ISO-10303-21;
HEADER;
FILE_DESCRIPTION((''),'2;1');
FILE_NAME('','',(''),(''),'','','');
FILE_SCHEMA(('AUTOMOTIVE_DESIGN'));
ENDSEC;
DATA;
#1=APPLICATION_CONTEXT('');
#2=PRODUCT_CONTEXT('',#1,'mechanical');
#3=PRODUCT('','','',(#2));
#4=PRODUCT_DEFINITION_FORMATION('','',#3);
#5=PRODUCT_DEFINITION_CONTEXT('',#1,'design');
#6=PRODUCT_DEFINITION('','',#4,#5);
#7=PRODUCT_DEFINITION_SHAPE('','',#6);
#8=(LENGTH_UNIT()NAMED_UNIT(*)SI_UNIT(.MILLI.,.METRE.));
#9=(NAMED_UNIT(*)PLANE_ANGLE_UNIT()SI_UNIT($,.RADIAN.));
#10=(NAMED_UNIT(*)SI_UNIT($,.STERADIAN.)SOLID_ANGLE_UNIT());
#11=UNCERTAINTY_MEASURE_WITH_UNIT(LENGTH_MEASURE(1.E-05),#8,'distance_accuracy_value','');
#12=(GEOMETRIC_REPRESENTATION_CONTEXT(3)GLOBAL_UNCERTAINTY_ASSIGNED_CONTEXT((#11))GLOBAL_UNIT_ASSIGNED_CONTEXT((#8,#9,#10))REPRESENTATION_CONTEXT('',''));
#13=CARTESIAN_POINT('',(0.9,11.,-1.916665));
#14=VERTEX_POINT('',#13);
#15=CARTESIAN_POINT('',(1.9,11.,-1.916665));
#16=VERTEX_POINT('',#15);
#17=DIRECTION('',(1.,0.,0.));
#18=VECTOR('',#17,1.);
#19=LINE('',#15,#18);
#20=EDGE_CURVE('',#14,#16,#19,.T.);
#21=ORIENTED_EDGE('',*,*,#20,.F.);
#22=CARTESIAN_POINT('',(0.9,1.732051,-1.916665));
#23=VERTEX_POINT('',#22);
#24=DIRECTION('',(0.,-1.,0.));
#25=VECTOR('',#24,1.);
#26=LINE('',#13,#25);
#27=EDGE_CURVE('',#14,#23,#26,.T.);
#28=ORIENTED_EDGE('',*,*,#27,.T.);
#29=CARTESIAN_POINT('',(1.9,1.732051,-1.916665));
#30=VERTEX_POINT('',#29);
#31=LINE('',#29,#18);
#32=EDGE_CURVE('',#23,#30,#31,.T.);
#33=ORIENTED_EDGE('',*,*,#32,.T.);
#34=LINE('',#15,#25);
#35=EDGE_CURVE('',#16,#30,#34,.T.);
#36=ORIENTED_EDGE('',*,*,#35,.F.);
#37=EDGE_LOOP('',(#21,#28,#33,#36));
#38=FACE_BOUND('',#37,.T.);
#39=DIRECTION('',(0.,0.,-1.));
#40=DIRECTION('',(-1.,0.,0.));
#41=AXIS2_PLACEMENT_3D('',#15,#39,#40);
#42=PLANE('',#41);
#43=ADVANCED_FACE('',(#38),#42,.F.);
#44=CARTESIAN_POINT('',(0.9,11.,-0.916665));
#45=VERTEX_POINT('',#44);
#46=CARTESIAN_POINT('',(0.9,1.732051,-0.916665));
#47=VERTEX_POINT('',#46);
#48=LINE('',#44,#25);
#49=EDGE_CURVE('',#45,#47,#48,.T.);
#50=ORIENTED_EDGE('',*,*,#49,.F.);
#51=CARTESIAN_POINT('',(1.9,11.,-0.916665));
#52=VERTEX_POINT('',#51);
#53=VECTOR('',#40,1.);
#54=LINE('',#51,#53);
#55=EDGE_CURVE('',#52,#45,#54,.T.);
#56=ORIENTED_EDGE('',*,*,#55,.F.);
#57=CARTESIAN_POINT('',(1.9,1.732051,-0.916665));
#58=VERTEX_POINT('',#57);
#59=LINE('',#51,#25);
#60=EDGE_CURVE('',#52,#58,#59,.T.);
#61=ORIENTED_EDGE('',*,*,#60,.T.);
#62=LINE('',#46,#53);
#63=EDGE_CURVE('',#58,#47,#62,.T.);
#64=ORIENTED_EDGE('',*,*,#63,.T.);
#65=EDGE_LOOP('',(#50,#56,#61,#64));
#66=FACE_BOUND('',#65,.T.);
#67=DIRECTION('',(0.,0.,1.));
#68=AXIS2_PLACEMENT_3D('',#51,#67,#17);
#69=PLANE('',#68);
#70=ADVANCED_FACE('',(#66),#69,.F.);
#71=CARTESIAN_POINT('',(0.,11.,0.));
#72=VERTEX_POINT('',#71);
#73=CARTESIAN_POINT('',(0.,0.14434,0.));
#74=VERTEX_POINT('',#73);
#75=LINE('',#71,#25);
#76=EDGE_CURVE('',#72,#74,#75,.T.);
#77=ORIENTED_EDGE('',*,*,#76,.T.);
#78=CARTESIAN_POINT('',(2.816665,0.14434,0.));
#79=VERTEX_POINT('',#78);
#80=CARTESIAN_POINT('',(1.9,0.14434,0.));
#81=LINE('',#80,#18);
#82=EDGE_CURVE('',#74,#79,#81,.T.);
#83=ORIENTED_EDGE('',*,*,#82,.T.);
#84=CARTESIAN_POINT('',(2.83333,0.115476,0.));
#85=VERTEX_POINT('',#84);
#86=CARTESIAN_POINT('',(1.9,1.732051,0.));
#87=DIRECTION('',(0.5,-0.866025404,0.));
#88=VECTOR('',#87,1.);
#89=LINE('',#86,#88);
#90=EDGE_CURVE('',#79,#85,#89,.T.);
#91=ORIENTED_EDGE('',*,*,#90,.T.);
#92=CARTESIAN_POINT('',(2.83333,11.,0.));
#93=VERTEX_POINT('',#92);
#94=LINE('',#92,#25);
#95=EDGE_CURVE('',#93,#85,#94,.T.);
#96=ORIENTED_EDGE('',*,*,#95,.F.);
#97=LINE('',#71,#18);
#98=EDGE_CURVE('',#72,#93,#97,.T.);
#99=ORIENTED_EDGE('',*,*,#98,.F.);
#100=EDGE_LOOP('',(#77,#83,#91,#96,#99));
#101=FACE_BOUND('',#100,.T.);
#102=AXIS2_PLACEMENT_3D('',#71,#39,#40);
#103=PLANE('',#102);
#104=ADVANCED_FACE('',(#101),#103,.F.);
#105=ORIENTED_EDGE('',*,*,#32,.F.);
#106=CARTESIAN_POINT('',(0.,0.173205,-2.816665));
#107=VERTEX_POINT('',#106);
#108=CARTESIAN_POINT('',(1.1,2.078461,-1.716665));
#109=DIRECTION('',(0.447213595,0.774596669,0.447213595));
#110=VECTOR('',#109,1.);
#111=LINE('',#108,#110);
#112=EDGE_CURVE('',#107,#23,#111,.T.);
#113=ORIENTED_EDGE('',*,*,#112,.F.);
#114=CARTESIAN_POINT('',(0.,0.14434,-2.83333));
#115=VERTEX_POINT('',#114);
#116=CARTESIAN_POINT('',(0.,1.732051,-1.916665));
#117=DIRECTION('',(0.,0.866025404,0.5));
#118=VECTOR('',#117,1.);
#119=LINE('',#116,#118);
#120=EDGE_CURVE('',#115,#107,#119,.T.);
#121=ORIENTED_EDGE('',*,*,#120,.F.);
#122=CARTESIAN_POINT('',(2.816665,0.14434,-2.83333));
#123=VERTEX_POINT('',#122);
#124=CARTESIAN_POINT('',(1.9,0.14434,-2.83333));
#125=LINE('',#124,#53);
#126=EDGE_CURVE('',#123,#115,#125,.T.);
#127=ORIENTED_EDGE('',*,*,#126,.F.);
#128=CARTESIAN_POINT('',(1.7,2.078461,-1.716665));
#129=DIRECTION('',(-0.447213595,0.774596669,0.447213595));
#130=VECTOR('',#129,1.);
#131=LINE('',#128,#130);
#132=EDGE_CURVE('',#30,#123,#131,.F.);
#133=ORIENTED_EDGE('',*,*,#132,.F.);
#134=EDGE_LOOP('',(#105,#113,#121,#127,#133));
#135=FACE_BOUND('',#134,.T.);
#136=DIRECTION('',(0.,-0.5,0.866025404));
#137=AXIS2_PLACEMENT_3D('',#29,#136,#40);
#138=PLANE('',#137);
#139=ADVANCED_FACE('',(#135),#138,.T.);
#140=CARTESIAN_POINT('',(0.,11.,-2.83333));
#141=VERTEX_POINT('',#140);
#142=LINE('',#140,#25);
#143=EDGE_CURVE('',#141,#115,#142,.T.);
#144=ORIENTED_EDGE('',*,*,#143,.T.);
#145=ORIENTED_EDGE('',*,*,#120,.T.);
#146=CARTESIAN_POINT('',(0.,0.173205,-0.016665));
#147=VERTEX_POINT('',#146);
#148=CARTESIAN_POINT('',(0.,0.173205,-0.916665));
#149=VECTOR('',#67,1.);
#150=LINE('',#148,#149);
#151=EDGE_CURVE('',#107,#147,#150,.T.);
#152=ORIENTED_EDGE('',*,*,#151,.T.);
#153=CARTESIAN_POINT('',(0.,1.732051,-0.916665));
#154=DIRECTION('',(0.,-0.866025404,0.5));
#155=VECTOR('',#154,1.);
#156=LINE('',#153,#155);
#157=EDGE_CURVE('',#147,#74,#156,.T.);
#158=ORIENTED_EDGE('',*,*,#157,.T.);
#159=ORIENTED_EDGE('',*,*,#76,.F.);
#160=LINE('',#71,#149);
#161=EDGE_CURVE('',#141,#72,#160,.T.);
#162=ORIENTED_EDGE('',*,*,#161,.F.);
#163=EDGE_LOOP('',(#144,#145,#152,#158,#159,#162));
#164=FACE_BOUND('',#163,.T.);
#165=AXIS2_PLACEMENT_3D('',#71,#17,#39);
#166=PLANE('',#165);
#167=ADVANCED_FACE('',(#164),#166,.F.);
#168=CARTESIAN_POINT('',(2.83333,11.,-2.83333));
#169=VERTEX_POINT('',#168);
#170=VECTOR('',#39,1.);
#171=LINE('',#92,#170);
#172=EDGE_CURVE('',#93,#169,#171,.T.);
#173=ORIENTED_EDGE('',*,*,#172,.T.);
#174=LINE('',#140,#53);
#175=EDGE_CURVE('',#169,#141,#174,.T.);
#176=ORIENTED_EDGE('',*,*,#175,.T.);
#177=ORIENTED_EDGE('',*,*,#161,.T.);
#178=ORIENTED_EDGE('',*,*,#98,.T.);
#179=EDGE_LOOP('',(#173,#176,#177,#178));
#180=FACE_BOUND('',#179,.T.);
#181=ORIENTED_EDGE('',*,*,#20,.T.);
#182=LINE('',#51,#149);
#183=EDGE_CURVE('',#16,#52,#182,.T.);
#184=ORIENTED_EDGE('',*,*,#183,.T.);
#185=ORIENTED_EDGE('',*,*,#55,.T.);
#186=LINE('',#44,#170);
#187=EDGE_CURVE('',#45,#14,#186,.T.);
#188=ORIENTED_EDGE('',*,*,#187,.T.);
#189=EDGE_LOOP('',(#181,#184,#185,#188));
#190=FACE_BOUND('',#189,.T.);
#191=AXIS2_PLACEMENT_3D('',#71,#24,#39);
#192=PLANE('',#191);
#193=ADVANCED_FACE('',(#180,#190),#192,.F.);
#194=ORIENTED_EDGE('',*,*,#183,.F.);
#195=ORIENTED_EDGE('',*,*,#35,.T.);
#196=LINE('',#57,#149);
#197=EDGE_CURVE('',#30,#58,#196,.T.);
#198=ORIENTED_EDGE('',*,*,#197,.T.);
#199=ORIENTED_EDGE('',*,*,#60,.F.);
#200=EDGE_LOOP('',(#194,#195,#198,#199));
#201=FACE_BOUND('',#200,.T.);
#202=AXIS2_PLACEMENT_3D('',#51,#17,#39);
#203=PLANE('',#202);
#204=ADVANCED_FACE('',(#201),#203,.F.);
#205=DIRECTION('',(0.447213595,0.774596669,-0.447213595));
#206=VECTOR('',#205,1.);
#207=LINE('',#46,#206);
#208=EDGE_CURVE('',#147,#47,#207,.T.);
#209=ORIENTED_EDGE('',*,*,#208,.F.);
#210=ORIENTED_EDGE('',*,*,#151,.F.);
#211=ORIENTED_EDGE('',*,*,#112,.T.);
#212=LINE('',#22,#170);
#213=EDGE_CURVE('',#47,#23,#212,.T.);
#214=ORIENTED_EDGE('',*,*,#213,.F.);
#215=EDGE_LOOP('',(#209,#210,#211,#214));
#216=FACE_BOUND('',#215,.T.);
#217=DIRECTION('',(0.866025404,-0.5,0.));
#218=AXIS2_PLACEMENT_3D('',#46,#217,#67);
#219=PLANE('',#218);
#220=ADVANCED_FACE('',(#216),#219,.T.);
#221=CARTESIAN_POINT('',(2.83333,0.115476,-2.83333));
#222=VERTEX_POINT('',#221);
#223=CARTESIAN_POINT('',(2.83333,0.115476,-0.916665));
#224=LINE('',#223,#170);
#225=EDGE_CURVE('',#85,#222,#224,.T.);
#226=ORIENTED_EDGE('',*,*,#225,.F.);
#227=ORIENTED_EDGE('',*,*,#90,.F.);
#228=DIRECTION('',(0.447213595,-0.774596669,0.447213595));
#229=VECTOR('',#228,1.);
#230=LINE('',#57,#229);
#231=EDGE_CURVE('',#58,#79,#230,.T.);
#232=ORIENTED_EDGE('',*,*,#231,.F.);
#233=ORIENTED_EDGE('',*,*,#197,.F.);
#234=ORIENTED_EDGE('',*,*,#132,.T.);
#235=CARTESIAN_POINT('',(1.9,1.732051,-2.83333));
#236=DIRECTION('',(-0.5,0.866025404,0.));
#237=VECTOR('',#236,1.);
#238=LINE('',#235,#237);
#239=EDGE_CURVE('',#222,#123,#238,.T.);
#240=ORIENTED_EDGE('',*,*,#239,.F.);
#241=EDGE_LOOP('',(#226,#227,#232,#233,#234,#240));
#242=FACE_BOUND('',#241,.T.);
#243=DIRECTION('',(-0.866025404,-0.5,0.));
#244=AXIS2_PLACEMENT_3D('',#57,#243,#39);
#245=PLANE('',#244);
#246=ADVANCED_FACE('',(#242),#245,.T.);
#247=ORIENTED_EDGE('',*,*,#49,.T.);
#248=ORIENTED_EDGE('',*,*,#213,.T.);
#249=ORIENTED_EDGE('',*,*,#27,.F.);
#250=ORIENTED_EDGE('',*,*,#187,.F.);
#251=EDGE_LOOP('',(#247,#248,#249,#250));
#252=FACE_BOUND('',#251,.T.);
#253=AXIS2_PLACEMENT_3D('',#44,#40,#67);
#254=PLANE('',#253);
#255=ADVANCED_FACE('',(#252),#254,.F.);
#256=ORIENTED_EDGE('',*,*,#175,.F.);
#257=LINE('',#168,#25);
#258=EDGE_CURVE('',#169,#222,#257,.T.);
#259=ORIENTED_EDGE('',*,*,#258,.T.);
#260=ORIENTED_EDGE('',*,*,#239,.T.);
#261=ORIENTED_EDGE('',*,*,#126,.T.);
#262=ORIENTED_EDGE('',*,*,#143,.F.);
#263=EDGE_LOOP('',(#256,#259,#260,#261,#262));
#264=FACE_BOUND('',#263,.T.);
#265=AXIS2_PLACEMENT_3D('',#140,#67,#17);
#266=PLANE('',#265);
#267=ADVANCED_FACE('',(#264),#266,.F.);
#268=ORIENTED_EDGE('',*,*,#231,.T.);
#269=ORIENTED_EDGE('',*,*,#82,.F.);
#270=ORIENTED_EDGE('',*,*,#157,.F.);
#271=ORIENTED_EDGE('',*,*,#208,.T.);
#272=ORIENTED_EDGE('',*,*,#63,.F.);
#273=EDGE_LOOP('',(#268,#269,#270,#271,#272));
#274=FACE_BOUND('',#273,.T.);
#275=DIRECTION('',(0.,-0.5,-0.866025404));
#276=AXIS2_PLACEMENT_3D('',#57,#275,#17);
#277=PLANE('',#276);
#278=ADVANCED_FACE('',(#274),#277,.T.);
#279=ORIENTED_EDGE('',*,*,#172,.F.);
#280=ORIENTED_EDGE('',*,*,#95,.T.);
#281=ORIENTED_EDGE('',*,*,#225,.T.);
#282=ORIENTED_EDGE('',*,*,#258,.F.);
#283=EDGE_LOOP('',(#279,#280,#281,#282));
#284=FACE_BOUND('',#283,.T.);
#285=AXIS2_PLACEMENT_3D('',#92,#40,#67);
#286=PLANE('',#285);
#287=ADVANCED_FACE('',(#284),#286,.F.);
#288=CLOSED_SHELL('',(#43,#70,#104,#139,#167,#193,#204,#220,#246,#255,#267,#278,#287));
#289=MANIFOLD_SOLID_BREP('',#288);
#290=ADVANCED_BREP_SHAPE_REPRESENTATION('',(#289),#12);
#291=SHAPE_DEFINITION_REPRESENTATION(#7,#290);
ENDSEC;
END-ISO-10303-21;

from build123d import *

# Parameters (mm, degrees)
SKETCH1_W           = 2.83333
SKETCH1_H           = 2.83333
BOSS_EXTRUDE2_DEPTH = 11
SKETCH2_W           = 1
SKETCH2_H           = 1
CUT_EXTRUDE1_DEPTH  = 11


with BuildPart() as part:
    # Sketch1 → Boss-Extrude2 (new body)
    with BuildSketch(Plane(origin=(0, 0, 0), x_dir=(1, 0, 0), z_dir=(0, 1, 0))):
        with Locations((1.416665, 1.416665)):
            Rectangle(SKETCH1_W, SKETCH1_H)
    extrude(amount=BOSS_EXTRUDE2_DEPTH)

    # Sketch2 → Cut-Extrude1 (cut)
    with BuildSketch(Plane(origin=(0, 0, 0), x_dir=(-1, 0, 0), z_dir=(0, -1, 0))):
        with Locations((-1.4, 1.416665)):
            Rectangle(SKETCH2_W, SKETCH2_H)
    extrude(amount=-CUT_EXTRUDE1_DEPTH, mode=Mode.SUBTRACT)

    # Chamfer5
    # the kernel refuses this chamfer: 1.732050808, 1 mm, written as the material it takes off along each edge
    with BuildSketch(Plane(origin=(1.9, 0, -0.916665), x_dir=(0, -0.05789386240267139, 0.9983227437537926), z_dir=(-1, 0, 0)), Plane(origin=(0.9, 0, -0.916665), x_dir=(-0.9983227437537926, -0.0578938624026714, 0), z_dir=(0, 0, -1)), Plane(origin=(0.9, 0, -1.916665), x_dir=(0, -0.05789386240267139, -0.9983227437537926), z_dir=(1, 0, 0)), Plane(origin=(1.9, 0, -1.916665), x_dir=(0.9983227437537926, -0.05789386240267139, 0), z_dir=(0, 0, 1))) as chamfer5_piece_1:
        with BuildLine():
            Line((1.03637929, 0), (-0.138331657, 1.787039577))
            Line((-0.138331657, 1.787039577), (-0.172914571, 1.785034075))
            ThreePointArc((-0.172914571, 1.785034075), (-0.086457286, 0.892517037), (-0.034582914, -0.002005502))
            Line((-0.034582914, -0.002005502), (0.002005502, -0.034582914))
            ThreePointArc((0.002005502, -0.034582914), (0.518458331, -0.004633232), (1.038384792, -0.034582914))
            Line((1.038384792, -0.034582914), (1.03637929, 0))
        make_face()
    extrude(amount=1, mode=Mode.SUBTRACT)
    with BuildSketch(Plane(origin=(1.9, 0, -1.916665), x_dir=(0.9983227437537926, -0.05789386240267139, 0), z_dir=(0, 0, 1))) as chamfer5_piece_2a_section:
        with BuildLine():
            Line((1.03637929, 0), (-0.138331657, 1.787039577))
            Line((-0.138331657, 1.787039577), (-0.172914571, 1.785034075))
            ThreePointArc((-0.172914571, 1.785034075), (-0.086457286, 0.892517037), (-0.034582914, -0.002005502))
            Line((-0.034582914, -0.002005502), (0.002005502, -0.034582914))
            ThreePointArc((0.002005502, -0.034582914), (0.518458331, -0.004633232), (1.038384792, -0.034582914))
            Line((1.038384792, -0.034582914), (1.03637929, 0))
        make_face()
    chamfer5_piece_2a = extrude(amount=5.480963971, mode=Mode.PRIVATE)
    chamfer5_piece_2a = split(chamfer5_piece_2a, bisect_by=Plane(origin=(2.220669895, 0.580899134, -0.916665), z_dir=(0, 0, 1)), keep=Keep.TOP, mode=Mode.PRIVATE)
    with BuildSketch(Plane(origin=(6.380963971, 0, -0.916665), x_dir=(0, -0.05789386240267139, 0.9983227437537926), z_dir=(-1, 0, 0))) as chamfer5_piece_2b_section:
        with BuildLine():
            Line((1.03637929, 0), (-0.138331657, 1.787039577))
            Line((-0.138331657, 1.787039577), (-0.172914571, 1.785034075))
            ThreePointArc((-0.172914571, 1.785034075), (-0.086457286, 0.892517037), (-0.034582914, -0.002005502))
            Line((-0.034582914, -0.002005502), (0.002005502, -0.034582914))
            ThreePointArc((0.002005502, -0.034582914), (0.518458331, -0.004633232), (1.038384792, -0.034582914))
            Line((1.038384792, -0.034582914), (1.03637929, 0))
        make_face()
    chamfer5_piece_2b = extrude(amount=5.480963971, mode=Mode.PRIVATE)
    chamfer5_piece_2b = split(chamfer5_piece_2b, bisect_by=Plane(origin=(1.9, 0.580899134, -0.595995105), z_dir=(1, 0, 0)), keep=Keep.TOP, mode=Mode.PRIVATE)
    chamfer5_piece_2 = chamfer5_piece_2a & chamfer5_piece_2b
    add(chamfer5_piece_2, mode=Mode.SUBTRACT)
    with BuildSketch(Plane(origin=(0.9, 0, 3.564298971), x_dir=(-0.9983227437537926, -0.0578938624026714, 0), z_dir=(0, 0, -1))) as chamfer5_piece_3a_section:
        with BuildLine():
            Line((1.03637929, 0), (-0.138331657, 1.787039577))
            Line((-0.138331657, 1.787039577), (-0.172914571, 1.785034075))
            ThreePointArc((-0.172914571, 1.785034075), (-0.086457286, 0.892517037), (-0.034582914, -0.002005502))
            Line((-0.034582914, -0.002005502), (0.002005502, -0.034582914))
            ThreePointArc((0.002005502, -0.034582914), (0.518458331, -0.004633232), (1.038384792, -0.034582914))
            Line((1.038384792, -0.034582914), (1.03637929, 0))
        make_face()
    chamfer5_piece_3a = extrude(amount=5.480963971, mode=Mode.PRIVATE)
    chamfer5_piece_3a = split(chamfer5_piece_3a, bisect_by=Plane(origin=(0.579330105, 0.580899134, -0.916665), z_dir=(0, 0, 1)), keep=Keep.TOP, mode=Mode.PRIVATE)
    with BuildSketch(Plane(origin=(1.9, 0, -0.916665), x_dir=(0, -0.05789386240267139, 0.9983227437537926), z_dir=(-1, 0, 0))) as chamfer5_piece_3b_section:
        with BuildLine():
            Line((1.03637929, 0), (-0.138331657, 1.787039577))
            Line((-0.138331657, 1.787039577), (-0.172914571, 1.785034075))
            ThreePointArc((-0.172914571, 1.785034075), (-0.086457286, 0.892517037), (-0.034582914, -0.002005502))
            Line((-0.034582914, -0.002005502), (0.002005502, -0.034582914))
            ThreePointArc((0.002005502, -0.034582914), (0.518458331, -0.004633232), (1.038384792, -0.034582914))
            Line((1.038384792, -0.034582914), (1.03637929, 0))
        make_face()
    chamfer5_piece_3b = extrude(amount=5.480963971, mode=Mode.PRIVATE)
    chamfer5_piece_3b = split(chamfer5_piece_3b, bisect_by=Plane(origin=(0.9, 0.580899134, -0.595995105), z_dir=(-1, 0, 0)), keep=Keep.TOP, mode=Mode.PRIVATE)
    chamfer5_piece_3 = chamfer5_piece_3a & chamfer5_piece_3b
    add(chamfer5_piece_3, mode=Mode.SUBTRACT)
    with BuildSketch(Plane(origin=(-3.580963971, 0, -1.916665), x_dir=(0, -0.05789386240267139, -0.9983227437537926), z_dir=(1, 0, 0))) as chamfer5_piece_4a_section:
        with BuildLine():
            Line((1.03637929, 0), (-0.138331657, 1.787039577))
            Line((-0.138331657, 1.787039577), (-0.172914571, 1.785034075))
            ThreePointArc((-0.172914571, 1.785034075), (-0.086457286, 0.892517037), (-0.034582914, -0.002005502))
            Line((-0.034582914, -0.002005502), (0.002005502, -0.034582914))
            ThreePointArc((0.002005502, -0.034582914), (0.518458331, -0.004633232), (1.038384792, -0.034582914))
            Line((1.038384792, -0.034582914), (1.03637929, 0))
        make_face()
    chamfer5_piece_4a = extrude(amount=5.480963971, mode=Mode.PRIVATE)
    chamfer5_piece_4a = split(chamfer5_piece_4a, bisect_by=Plane(origin=(0.9, 0.580899134, -2.237334895), z_dir=(-1, 0, 0)), keep=Keep.TOP, mode=Mode.PRIVATE)
    with BuildSketch(Plane(origin=(0.9, 0, -0.916665), x_dir=(-0.9983227437537926, -0.0578938624026714, 0), z_dir=(0, 0, -1))) as chamfer5_piece_4b_section:
        with BuildLine():
            Line((1.03637929, 0), (-0.138331657, 1.787039577))
            Line((-0.138331657, 1.787039577), (-0.172914571, 1.785034075))
            ThreePointArc((-0.172914571, 1.785034075), (-0.086457286, 0.892517037), (-0.034582914, -0.002005502))
            Line((-0.034582914, -0.002005502), (0.002005502, -0.034582914))
            ThreePointArc((0.002005502, -0.034582914), (0.518458331, -0.004633232), (1.038384792, -0.034582914))
            Line((1.038384792, -0.034582914), (1.03637929, 0))
        make_face()
    chamfer5_piece_4b = extrude(amount=5.480963971, mode=Mode.PRIVATE)
    chamfer5_piece_4b = split(chamfer5_piece_4b, bisect_by=Plane(origin=(0.579330105, 0.580899134, -1.916665), z_dir=(0, 0, -1)), keep=Keep.TOP, mode=Mode.PRIVATE)
    chamfer5_piece_4 = chamfer5_piece_4a & chamfer5_piece_4b
    add(chamfer5_piece_4, mode=Mode.SUBTRACT)
    with BuildSketch(Plane(origin=(1.9, 0, -6.397628971), x_dir=(0.9983227437537926, -0.05789386240267139, 0), z_dir=(0, 0, 1))) as chamfer5_piece_5a_section:
        with BuildLine():
            Line((1.03637929, 0), (-0.138331657, 1.787039577))
            Line((-0.138331657, 1.787039577), (-0.172914571, 1.785034075))
            ThreePointArc((-0.172914571, 1.785034075), (-0.086457286, 0.892517037), (-0.034582914, -0.002005502))
            Line((-0.034582914, -0.002005502), (0.002005502, -0.034582914))
            ThreePointArc((0.002005502, -0.034582914), (0.518458331, -0.004633232), (1.038384792, -0.034582914))
            Line((1.038384792, -0.034582914), (1.03637929, 0))
        make_face()
    chamfer5_piece_5a = extrude(amount=5.480963971, mode=Mode.PRIVATE)
    chamfer5_piece_5a = split(chamfer5_piece_5a, bisect_by=Plane(origin=(2.220669895, 0.580899134, -1.916665), z_dir=(0, 0, -1)), keep=Keep.TOP, mode=Mode.PRIVATE)
    with BuildSketch(Plane(origin=(0.9, 0, -1.916665), x_dir=(0, -0.05789386240267139, -0.9983227437537926), z_dir=(1, 0, 0))) as chamfer5_piece_5b_section:
        with BuildLine():
            Line((1.03637929, 0), (-0.138331657, 1.787039577))
            Line((-0.138331657, 1.787039577), (-0.172914571, 1.785034075))
            ThreePointArc((-0.172914571, 1.785034075), (-0.086457286, 0.892517037), (-0.034582914, -0.002005502))
            Line((-0.034582914, -0.002005502), (0.002005502, -0.034582914))
            ThreePointArc((0.002005502, -0.034582914), (0.518458331, -0.004633232), (1.038384792, -0.034582914))
            Line((1.038384792, -0.034582914), (1.03637929, 0))
        make_face()
    chamfer5_piece_5b = extrude(amount=5.480963971, mode=Mode.PRIVATE)
    chamfer5_piece_5b = split(chamfer5_piece_5b, bisect_by=Plane(origin=(1.9, 0.580899134, -2.237334895), z_dir=(1, 0, 0)), keep=Keep.TOP, mode=Mode.PRIVATE)
    chamfer5_piece_5 = chamfer5_piece_5a & chamfer5_piece_5b
    add(chamfer5_piece_5, mode=Mode.SUBTRACT)


solid = part.part
